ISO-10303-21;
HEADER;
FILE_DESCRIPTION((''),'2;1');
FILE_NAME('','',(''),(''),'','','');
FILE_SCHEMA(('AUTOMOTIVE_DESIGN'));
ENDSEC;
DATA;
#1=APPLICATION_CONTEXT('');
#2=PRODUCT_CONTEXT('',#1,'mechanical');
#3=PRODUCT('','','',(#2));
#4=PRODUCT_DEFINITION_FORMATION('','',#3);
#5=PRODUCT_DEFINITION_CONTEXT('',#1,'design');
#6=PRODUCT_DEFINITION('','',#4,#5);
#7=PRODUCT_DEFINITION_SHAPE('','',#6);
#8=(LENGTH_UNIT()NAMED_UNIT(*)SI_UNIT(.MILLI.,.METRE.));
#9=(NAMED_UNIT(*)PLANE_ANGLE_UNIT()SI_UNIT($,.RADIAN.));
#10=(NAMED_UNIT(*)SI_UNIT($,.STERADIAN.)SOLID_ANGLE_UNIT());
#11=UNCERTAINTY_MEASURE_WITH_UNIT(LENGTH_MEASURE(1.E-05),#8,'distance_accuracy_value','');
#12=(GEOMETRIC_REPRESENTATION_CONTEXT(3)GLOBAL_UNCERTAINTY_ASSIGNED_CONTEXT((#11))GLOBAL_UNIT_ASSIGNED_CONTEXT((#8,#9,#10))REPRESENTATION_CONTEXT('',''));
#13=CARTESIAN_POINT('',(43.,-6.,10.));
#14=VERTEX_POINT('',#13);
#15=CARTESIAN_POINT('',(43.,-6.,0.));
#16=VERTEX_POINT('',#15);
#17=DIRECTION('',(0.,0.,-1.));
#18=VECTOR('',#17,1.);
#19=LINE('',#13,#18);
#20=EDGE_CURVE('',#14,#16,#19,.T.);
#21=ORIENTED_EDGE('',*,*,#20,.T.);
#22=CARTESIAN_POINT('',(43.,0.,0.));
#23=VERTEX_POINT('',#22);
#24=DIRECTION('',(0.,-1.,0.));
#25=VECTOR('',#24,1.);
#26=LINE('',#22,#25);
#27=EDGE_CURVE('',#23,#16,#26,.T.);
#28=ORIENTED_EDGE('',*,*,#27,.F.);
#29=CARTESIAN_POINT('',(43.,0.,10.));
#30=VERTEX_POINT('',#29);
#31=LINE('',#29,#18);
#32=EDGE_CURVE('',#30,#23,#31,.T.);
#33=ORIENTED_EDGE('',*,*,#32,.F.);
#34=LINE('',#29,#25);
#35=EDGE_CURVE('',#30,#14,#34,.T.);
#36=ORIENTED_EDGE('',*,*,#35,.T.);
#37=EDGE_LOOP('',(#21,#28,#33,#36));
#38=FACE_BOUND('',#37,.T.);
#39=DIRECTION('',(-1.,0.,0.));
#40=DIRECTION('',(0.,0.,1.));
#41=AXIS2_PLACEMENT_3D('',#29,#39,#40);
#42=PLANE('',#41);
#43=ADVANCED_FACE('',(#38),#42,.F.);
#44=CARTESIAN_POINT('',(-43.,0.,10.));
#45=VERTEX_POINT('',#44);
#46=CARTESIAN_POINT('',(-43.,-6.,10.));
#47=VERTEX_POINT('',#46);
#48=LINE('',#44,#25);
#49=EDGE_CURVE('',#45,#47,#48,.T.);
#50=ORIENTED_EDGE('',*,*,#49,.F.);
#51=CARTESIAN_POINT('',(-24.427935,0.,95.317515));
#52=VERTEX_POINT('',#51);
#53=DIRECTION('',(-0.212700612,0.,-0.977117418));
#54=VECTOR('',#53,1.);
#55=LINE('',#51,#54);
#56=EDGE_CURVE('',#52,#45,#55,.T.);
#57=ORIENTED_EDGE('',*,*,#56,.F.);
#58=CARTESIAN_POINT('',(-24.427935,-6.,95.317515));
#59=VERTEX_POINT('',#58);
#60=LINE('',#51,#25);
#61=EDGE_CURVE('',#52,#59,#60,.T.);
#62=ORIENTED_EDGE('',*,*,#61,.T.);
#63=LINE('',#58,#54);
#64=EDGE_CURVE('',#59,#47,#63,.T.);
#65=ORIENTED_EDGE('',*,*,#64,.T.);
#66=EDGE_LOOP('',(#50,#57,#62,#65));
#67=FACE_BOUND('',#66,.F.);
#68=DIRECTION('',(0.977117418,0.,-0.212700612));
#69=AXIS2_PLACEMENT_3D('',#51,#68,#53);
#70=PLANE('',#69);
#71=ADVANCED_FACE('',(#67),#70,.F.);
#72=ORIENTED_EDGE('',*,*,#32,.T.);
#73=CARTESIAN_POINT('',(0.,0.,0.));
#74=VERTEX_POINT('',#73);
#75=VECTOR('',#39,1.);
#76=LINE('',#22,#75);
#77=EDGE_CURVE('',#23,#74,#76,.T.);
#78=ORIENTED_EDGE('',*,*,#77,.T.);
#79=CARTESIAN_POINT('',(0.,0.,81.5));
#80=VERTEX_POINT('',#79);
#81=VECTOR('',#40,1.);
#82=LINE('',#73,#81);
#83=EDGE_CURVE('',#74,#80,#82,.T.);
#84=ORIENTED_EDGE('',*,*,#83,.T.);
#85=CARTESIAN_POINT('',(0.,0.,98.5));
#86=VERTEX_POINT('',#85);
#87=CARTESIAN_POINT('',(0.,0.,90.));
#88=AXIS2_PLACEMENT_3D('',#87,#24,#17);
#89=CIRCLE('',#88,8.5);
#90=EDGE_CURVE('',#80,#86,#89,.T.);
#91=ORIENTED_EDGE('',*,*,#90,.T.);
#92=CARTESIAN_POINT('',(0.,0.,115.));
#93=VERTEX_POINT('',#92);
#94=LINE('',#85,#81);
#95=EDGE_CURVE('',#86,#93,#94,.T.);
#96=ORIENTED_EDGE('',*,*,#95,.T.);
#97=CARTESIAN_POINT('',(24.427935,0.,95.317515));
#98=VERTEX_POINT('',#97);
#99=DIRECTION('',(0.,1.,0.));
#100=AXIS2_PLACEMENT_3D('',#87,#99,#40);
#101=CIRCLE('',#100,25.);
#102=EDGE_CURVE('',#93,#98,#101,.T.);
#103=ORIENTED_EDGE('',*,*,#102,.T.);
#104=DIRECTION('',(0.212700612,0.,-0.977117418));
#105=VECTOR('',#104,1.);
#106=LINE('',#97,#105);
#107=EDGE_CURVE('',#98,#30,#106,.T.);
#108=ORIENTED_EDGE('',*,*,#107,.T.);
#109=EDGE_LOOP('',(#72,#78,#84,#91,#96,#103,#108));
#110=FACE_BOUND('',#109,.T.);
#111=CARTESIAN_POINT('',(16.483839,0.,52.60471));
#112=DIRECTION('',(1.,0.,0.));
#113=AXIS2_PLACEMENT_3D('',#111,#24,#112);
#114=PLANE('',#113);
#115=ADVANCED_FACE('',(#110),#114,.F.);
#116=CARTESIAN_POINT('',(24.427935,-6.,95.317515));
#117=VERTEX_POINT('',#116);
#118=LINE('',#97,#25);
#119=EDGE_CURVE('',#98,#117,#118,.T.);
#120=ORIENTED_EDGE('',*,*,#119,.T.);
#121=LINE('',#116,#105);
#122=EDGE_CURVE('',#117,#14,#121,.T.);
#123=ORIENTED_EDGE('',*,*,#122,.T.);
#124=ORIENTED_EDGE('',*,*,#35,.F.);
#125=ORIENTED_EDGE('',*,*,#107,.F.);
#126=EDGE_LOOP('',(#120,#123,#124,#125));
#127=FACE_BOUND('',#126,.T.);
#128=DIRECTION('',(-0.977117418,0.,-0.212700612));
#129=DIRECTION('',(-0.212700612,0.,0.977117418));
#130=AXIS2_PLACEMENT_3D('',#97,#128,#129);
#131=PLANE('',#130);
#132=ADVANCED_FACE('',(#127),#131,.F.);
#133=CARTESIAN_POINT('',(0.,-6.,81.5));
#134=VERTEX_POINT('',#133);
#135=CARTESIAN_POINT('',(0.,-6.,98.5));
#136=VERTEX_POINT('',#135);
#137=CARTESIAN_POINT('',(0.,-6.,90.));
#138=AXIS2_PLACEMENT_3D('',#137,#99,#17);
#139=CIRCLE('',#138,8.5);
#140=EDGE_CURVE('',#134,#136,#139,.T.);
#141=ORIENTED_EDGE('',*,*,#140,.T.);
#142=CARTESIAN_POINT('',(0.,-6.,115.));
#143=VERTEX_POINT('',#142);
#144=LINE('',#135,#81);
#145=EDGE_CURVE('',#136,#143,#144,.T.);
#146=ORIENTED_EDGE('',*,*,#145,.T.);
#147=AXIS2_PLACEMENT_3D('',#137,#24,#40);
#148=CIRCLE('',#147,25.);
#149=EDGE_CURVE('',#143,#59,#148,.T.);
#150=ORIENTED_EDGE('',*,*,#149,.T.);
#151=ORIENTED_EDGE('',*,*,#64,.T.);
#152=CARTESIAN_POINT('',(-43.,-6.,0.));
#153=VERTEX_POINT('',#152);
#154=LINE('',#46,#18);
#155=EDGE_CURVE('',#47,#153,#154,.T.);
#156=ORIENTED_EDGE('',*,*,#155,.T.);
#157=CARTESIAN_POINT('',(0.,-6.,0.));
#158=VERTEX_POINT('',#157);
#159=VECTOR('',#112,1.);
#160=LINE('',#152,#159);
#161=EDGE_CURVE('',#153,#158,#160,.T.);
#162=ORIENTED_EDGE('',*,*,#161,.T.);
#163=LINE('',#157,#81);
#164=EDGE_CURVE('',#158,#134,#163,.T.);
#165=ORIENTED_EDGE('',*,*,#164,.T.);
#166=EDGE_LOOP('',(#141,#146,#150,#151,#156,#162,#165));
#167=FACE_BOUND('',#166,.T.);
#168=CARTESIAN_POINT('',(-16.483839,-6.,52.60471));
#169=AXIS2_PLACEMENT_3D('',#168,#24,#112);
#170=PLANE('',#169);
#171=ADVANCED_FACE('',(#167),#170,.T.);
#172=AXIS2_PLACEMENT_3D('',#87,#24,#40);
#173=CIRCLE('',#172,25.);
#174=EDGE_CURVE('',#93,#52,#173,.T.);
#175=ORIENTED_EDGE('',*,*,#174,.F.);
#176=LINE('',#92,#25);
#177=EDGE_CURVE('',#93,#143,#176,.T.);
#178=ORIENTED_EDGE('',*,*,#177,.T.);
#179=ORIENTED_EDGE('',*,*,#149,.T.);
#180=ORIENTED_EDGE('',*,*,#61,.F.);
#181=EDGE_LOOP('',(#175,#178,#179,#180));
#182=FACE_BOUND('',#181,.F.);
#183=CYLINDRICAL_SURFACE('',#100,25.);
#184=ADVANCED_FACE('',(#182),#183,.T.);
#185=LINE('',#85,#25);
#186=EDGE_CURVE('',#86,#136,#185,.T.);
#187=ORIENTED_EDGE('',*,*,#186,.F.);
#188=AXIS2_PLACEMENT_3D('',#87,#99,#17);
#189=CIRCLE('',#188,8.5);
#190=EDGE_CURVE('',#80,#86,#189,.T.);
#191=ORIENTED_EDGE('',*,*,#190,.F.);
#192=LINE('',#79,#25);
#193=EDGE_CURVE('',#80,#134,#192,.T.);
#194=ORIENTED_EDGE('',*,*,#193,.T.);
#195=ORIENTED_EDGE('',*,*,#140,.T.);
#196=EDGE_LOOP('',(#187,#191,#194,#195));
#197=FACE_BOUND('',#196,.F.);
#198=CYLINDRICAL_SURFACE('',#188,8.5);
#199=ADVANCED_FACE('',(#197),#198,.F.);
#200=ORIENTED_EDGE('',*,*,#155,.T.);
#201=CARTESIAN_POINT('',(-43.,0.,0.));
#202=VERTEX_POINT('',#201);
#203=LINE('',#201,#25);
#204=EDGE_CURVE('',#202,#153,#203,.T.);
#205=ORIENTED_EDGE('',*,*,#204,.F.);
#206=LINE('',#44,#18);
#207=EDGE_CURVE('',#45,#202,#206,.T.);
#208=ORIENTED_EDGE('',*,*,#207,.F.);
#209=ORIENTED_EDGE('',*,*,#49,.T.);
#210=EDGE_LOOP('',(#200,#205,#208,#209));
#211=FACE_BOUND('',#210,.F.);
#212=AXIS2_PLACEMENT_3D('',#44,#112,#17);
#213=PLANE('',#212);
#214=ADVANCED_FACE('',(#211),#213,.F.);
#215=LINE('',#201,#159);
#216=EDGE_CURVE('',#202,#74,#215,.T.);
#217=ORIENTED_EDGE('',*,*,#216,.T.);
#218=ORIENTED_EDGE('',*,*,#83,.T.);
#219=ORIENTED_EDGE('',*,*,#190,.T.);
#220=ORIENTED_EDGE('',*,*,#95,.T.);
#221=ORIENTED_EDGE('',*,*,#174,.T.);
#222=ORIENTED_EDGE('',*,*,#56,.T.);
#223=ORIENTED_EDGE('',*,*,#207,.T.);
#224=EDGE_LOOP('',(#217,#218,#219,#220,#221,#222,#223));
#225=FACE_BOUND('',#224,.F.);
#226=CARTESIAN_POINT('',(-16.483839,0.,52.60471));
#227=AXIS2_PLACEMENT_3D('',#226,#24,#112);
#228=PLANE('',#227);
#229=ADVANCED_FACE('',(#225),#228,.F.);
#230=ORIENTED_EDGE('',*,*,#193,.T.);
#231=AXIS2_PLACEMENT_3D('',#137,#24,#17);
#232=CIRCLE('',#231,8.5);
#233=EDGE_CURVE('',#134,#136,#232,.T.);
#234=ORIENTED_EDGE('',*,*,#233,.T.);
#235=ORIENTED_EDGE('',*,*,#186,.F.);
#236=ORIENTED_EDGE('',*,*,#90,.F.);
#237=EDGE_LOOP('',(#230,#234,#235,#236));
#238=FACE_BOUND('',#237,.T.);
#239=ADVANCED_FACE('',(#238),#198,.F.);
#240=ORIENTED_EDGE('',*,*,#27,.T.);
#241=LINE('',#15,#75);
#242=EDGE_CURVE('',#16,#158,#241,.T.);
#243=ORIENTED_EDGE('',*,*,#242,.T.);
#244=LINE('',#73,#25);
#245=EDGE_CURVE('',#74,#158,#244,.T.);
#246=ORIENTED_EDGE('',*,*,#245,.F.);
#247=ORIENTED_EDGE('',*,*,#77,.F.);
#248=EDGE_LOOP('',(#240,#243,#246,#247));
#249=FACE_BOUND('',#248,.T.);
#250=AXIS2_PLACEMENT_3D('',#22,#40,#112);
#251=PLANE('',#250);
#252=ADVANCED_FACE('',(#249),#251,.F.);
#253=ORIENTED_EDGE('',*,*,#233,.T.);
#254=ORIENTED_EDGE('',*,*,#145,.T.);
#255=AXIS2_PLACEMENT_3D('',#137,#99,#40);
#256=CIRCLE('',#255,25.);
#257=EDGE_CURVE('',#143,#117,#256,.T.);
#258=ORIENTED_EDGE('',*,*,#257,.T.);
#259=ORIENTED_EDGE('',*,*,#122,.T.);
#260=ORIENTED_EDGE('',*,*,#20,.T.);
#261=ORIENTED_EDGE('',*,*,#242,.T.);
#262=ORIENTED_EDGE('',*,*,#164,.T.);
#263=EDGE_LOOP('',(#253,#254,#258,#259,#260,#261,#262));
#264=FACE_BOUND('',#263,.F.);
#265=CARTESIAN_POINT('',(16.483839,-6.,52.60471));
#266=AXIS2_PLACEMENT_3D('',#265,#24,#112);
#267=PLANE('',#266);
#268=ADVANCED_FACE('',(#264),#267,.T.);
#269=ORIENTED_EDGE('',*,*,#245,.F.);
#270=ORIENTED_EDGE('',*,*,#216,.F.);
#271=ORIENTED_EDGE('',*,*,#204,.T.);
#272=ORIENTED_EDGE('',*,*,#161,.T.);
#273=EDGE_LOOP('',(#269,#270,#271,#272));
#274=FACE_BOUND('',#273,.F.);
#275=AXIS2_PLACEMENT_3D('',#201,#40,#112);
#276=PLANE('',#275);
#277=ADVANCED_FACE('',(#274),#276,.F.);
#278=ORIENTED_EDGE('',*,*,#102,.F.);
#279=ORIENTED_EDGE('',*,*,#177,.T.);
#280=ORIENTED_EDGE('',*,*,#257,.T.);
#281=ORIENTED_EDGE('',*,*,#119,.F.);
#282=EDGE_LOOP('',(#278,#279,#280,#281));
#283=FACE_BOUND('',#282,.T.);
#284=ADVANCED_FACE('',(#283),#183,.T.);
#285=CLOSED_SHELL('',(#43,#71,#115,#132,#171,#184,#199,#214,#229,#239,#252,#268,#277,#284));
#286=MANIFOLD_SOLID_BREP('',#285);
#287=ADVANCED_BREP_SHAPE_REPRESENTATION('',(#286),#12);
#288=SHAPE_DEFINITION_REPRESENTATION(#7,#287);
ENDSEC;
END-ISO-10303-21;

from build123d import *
from build123d import SkipClean  # not in build123d's __all__

# Parameters (mm, degrees)
F1_DEPTH = 6


with BuildPart() as f1:
    # F0 (on Front) → F1 (new body)
    with BuildSketch(Plane.XZ):
        with BuildLine():
            Line((-43, 0), (0, 0))
            Line((0, 0), (0, 81.5))
            ThreePointArc((0, 81.5), (-8.5, 90), (0, 98.5))
            Line((0, 98.5), (0, 115))
            ThreePointArc((0, 115), (-15.6853772226, 109.4671246306), (-24.4279354617, 95.3175153107))
            Line((-24.4279354617, 95.3175153107), (-43, 10))
            Line((-43, 10), (-43, 0))
        make_face()
    extrude(amount=F1_DEPTH)

    # F2: F1 across plane


with BuildPart() as f1_1:
    add(f1.part, clean=False)
    with SkipClean():  # cleaning this boolean's faces spoils the solid; the shape is the same uncleaned
        add(f1.part.mirror(Plane.YZ), clean=False)


solid = f1_1.part
